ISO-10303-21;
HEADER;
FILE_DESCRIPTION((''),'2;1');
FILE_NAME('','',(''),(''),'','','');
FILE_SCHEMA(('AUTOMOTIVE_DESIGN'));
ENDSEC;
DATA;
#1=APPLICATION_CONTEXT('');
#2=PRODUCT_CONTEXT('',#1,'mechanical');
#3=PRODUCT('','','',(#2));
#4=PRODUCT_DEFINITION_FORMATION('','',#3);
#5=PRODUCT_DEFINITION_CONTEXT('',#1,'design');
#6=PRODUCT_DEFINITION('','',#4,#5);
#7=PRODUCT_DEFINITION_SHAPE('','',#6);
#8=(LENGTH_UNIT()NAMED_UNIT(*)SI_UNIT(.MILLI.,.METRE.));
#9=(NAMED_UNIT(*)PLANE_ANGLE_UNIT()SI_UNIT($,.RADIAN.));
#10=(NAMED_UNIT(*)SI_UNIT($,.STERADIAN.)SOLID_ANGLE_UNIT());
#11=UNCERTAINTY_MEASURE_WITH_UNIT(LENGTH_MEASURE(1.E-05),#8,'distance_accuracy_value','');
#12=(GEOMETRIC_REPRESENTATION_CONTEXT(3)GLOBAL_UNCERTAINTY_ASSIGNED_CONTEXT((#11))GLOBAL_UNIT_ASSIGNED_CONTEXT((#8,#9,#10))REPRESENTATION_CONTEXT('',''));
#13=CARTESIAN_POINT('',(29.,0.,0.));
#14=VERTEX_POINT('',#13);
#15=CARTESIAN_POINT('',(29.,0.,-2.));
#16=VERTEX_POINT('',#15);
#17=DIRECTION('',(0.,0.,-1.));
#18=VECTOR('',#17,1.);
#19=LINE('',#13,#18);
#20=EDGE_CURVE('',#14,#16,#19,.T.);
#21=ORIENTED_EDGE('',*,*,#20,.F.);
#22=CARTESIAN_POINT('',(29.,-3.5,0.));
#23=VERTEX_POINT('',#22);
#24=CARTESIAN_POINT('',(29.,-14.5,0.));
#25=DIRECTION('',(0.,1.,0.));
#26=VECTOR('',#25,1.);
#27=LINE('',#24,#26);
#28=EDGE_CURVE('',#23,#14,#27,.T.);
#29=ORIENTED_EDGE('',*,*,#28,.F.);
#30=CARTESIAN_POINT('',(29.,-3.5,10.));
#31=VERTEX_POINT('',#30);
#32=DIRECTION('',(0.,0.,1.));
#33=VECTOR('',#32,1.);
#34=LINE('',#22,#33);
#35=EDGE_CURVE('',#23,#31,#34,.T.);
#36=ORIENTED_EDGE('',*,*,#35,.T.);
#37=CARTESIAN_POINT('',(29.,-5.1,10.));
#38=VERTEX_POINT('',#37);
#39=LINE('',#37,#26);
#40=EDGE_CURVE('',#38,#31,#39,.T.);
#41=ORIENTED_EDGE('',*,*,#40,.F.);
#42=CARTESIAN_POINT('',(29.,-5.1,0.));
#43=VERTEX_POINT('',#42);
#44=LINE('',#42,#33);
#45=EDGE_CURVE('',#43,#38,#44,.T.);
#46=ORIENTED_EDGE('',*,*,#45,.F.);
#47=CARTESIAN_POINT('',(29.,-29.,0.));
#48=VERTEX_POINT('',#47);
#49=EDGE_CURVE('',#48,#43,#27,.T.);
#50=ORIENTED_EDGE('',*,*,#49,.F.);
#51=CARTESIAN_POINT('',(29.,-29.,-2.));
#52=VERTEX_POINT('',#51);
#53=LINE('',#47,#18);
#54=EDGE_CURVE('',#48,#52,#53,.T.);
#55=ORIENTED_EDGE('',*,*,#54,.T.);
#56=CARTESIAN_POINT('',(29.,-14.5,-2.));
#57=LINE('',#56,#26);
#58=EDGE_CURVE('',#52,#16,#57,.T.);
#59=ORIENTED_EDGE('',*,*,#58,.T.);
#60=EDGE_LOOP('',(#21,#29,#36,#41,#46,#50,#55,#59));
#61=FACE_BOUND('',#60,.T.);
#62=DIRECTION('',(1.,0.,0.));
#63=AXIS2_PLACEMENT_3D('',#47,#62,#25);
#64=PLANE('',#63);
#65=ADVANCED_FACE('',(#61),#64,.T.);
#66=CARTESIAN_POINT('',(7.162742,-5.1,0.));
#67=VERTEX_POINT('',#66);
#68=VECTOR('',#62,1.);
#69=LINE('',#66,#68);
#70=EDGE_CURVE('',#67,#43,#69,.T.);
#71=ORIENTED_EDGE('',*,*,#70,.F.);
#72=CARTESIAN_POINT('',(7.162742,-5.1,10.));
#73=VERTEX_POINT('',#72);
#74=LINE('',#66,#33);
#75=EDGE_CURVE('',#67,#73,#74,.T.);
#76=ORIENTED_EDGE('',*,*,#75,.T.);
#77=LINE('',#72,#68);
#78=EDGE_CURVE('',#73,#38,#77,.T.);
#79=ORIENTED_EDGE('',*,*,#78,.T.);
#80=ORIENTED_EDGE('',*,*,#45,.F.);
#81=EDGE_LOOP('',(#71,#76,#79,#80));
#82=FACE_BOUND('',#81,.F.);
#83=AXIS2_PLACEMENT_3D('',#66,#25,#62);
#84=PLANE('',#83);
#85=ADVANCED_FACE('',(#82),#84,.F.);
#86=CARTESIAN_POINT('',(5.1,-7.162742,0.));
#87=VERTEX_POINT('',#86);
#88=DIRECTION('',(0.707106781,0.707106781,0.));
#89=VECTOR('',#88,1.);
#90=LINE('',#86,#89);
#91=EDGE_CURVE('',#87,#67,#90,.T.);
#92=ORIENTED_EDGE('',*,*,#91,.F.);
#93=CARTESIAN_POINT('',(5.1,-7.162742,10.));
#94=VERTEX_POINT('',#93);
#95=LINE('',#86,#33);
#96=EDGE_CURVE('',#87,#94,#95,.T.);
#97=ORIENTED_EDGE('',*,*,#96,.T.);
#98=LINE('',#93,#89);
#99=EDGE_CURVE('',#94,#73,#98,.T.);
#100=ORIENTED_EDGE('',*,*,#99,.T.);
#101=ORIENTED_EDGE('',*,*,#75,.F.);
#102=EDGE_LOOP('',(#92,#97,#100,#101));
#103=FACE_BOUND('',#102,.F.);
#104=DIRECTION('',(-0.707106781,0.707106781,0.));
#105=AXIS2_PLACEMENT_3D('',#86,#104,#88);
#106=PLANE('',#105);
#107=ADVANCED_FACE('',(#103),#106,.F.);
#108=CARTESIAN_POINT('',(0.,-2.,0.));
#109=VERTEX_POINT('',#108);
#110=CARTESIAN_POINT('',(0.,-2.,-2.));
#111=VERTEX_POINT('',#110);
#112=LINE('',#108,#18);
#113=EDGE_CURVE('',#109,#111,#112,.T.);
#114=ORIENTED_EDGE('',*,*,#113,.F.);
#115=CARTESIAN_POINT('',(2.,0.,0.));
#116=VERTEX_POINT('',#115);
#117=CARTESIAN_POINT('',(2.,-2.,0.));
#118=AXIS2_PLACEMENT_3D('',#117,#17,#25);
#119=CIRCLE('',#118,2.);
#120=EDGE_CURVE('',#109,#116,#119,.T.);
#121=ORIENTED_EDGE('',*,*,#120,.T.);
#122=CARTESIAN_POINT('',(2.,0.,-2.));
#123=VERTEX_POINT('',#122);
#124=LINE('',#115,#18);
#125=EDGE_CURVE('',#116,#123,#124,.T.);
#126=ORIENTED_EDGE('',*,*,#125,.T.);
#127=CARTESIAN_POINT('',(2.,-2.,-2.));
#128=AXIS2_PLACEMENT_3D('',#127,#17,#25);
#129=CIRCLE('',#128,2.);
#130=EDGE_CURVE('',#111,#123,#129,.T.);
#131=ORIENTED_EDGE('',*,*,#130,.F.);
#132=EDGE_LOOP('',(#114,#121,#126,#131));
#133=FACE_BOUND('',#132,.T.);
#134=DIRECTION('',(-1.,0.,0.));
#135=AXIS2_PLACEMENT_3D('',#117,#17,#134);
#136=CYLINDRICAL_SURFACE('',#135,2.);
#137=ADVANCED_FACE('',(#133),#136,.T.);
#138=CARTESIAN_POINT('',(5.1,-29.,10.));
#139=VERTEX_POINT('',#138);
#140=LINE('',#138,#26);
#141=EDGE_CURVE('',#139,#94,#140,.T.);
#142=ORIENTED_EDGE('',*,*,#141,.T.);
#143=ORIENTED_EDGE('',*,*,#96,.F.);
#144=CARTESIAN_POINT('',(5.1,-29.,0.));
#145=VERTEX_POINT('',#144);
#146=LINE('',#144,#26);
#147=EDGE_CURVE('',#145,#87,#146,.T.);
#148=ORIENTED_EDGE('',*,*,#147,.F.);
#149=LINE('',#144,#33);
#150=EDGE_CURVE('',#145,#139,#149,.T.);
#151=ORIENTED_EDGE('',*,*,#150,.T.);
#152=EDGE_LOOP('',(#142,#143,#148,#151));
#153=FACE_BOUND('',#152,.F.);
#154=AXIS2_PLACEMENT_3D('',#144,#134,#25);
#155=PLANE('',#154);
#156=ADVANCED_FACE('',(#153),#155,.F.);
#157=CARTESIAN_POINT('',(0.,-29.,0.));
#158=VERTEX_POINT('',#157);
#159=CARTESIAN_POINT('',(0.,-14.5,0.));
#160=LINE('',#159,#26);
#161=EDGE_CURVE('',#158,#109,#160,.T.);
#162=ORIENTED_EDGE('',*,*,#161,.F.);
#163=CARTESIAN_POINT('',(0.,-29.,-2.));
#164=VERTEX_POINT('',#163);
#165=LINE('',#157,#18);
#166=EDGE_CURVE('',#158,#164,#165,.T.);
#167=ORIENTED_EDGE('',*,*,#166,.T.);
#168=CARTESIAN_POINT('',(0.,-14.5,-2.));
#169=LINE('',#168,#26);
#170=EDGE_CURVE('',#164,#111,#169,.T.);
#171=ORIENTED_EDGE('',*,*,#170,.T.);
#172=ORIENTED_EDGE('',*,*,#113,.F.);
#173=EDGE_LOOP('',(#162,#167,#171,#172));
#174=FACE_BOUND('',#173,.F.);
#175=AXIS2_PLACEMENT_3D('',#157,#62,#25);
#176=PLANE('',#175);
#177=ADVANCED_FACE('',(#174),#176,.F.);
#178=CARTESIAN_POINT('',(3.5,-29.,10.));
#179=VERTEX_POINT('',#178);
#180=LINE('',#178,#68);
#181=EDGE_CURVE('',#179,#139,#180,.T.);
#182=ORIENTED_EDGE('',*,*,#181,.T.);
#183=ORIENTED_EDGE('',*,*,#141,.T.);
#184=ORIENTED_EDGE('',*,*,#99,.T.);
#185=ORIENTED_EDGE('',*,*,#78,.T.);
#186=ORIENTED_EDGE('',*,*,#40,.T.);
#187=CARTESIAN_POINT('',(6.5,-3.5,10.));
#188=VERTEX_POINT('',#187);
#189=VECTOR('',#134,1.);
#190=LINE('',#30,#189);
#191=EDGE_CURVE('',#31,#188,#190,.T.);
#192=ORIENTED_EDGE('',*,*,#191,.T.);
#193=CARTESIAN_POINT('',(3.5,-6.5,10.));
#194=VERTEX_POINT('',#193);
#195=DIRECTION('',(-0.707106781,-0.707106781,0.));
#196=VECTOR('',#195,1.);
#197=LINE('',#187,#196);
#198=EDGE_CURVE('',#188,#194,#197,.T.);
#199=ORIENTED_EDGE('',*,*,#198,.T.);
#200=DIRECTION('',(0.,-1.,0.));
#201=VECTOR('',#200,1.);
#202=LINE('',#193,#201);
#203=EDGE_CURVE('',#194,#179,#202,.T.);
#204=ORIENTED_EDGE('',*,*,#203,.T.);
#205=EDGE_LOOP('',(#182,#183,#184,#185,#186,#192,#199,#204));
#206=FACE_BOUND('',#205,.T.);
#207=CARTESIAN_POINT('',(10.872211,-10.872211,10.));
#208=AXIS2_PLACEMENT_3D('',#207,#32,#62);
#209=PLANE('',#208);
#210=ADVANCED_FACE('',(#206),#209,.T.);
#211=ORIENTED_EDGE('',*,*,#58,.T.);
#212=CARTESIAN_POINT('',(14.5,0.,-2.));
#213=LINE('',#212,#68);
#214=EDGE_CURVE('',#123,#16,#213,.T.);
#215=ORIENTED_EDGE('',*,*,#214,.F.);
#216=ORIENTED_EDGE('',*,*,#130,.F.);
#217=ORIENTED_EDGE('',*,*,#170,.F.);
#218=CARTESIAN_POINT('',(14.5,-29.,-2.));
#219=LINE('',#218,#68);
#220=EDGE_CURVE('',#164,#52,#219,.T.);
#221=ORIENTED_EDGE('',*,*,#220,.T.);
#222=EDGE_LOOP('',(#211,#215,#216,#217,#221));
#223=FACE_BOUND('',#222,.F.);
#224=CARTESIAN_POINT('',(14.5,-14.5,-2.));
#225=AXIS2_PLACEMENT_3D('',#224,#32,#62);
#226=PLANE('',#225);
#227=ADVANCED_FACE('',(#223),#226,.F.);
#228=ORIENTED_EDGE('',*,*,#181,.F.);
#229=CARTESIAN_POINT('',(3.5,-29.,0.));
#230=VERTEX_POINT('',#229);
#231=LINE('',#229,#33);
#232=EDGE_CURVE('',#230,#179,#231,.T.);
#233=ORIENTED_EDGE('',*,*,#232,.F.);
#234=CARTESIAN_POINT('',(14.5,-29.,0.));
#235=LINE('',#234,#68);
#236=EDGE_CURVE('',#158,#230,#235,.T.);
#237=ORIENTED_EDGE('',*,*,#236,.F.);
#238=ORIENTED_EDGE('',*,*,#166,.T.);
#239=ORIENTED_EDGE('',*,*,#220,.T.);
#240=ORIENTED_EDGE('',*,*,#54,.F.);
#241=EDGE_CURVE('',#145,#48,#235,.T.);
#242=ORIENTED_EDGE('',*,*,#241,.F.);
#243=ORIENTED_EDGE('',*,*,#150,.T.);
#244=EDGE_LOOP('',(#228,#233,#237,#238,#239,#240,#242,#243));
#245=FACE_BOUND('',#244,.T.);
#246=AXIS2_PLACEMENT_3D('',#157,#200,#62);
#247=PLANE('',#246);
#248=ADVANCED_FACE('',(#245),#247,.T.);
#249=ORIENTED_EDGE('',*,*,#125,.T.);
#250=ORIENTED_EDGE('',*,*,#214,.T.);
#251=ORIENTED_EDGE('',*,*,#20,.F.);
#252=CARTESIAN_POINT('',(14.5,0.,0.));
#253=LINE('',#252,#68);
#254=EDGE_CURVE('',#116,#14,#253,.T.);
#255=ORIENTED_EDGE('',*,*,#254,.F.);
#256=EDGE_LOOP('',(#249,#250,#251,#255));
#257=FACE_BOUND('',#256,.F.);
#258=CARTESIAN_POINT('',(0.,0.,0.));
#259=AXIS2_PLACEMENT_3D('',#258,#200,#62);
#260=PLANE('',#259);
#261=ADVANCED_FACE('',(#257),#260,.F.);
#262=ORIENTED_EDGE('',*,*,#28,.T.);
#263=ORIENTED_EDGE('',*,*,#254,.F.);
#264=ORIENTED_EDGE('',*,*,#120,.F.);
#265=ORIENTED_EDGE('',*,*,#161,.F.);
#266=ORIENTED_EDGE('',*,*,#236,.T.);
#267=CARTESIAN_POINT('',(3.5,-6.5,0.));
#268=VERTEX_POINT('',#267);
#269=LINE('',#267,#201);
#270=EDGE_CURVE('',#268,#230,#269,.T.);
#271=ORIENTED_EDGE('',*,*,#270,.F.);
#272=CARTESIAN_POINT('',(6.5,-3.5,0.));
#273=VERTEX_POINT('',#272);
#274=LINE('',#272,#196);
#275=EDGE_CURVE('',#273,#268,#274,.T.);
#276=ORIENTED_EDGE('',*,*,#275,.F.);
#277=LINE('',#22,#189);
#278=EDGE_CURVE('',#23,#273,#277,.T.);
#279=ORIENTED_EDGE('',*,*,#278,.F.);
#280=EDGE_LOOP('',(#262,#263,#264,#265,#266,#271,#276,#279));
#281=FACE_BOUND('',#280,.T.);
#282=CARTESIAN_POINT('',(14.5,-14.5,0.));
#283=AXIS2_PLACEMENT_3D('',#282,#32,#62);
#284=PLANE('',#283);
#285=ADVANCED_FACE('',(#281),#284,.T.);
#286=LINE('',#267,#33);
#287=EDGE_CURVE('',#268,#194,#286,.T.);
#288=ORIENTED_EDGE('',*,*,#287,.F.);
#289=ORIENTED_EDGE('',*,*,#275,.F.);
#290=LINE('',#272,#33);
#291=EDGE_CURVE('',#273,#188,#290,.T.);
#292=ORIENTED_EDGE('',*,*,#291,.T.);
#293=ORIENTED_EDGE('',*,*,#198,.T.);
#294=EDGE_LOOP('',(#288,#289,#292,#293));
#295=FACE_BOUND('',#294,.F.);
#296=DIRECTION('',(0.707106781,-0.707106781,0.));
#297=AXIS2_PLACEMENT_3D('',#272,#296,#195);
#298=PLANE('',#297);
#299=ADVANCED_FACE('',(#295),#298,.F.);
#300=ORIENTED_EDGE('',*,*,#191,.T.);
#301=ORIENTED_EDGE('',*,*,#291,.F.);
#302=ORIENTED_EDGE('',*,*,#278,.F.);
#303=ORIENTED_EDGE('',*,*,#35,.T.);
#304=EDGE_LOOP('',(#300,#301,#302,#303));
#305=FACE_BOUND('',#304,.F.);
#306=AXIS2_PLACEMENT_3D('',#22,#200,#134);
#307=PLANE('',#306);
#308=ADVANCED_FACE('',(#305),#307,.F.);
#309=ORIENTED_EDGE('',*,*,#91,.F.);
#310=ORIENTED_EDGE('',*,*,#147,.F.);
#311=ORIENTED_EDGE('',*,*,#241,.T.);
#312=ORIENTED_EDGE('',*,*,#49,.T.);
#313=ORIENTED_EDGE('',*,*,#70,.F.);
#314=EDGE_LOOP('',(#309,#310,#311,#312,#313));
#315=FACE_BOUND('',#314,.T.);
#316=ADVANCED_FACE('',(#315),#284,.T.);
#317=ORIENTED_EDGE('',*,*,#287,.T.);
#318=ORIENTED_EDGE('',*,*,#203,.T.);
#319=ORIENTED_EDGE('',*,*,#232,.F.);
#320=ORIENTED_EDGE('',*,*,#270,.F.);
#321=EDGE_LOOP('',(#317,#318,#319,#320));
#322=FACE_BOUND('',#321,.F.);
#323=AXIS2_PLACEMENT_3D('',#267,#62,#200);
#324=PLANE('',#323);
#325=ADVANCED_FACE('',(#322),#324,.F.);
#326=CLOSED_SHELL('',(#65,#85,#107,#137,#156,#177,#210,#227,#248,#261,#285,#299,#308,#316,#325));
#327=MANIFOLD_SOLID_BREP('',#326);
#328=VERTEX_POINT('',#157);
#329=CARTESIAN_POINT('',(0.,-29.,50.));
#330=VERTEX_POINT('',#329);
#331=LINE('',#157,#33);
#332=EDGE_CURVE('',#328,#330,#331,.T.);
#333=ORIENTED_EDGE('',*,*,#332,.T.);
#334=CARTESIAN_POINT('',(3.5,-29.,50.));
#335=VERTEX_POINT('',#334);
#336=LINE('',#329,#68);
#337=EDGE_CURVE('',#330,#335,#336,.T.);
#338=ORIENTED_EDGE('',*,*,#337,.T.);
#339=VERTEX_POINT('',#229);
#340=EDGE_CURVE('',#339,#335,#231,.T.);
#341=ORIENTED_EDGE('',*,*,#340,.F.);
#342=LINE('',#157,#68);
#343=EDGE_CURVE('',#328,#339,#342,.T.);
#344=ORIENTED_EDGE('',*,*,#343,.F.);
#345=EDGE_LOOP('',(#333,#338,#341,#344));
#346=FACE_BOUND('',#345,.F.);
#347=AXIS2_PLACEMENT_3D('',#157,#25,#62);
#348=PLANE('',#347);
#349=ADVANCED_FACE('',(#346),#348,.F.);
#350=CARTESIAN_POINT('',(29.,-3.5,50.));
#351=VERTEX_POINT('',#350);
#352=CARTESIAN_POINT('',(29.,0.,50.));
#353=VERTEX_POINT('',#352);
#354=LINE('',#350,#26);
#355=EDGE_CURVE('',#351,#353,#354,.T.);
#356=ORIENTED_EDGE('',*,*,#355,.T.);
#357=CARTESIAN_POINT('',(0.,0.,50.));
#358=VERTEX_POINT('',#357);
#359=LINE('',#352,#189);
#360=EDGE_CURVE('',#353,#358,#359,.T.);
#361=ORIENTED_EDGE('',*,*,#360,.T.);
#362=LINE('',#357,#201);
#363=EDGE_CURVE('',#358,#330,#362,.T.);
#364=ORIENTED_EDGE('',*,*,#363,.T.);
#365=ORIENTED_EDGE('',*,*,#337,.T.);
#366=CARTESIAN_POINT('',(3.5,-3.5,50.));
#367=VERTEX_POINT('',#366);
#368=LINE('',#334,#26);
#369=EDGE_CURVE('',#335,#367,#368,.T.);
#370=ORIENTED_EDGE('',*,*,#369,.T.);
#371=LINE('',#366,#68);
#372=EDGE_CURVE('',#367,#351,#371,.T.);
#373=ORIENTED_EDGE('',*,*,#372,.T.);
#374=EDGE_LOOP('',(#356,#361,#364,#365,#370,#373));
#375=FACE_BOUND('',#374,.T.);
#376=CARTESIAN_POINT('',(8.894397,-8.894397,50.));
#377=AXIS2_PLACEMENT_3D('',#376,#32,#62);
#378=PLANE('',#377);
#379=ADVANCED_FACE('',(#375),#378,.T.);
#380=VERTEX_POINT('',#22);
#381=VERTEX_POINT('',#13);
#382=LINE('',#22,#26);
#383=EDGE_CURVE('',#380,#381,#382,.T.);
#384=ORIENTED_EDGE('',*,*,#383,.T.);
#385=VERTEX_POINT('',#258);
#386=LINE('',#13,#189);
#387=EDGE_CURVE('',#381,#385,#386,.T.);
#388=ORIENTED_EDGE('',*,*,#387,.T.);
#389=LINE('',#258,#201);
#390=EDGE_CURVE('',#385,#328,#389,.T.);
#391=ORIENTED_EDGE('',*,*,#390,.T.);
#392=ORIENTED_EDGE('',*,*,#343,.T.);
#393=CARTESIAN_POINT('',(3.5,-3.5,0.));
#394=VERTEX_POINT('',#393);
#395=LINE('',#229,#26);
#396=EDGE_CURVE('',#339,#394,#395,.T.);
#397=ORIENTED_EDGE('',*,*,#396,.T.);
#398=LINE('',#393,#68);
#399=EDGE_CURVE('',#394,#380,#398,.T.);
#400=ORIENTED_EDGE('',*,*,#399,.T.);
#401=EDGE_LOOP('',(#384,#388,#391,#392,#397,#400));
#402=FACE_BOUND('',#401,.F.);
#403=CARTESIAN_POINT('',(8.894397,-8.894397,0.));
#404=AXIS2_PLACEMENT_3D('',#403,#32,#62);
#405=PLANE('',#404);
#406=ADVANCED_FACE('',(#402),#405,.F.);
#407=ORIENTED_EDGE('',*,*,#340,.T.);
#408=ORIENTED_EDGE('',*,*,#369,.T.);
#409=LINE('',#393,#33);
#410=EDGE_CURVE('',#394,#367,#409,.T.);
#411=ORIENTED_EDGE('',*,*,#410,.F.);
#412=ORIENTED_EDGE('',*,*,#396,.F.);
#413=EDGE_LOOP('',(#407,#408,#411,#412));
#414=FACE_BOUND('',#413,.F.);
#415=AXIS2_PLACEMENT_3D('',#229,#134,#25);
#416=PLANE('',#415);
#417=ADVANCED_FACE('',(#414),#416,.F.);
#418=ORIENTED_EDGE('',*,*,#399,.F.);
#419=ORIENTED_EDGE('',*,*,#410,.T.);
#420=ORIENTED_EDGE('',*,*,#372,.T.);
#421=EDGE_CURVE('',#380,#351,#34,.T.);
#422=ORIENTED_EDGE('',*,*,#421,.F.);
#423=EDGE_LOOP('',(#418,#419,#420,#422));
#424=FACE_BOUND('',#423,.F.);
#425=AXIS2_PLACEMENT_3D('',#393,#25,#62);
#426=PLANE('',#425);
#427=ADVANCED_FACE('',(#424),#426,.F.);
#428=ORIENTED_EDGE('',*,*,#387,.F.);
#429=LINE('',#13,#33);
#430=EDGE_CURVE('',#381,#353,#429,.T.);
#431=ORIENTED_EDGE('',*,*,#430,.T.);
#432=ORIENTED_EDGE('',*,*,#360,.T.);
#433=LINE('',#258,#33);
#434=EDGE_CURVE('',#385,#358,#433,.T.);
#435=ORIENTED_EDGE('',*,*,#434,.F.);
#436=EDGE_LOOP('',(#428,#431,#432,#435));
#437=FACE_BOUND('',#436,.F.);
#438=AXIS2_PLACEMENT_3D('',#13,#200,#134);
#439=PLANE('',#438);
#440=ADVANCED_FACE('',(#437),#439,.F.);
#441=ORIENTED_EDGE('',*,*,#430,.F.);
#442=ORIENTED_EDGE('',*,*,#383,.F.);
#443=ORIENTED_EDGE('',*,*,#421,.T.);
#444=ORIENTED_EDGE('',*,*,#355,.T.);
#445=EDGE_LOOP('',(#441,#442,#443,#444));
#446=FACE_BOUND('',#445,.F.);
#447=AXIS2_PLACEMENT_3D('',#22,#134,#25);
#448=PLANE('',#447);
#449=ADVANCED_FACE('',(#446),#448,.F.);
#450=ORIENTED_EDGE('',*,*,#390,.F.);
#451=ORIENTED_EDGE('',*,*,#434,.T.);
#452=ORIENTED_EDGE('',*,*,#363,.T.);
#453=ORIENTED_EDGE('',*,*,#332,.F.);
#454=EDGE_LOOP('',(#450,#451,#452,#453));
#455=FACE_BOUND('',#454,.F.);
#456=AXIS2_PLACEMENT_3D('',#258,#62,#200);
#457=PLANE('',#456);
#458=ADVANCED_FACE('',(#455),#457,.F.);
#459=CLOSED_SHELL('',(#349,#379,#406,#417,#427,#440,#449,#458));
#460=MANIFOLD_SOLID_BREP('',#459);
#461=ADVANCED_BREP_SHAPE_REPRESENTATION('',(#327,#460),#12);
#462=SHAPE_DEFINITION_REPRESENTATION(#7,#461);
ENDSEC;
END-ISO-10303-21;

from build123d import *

# Parameters (mm, degrees)
F1_DEPTH = 50
F2_W     = 29
F2_H     = 29
F3_DEPTH = 2
F5_DEPTH = 10
F6_R     = 2


with BuildPart() as f1:
    # F0 (on Top) → F1 (new body)
    with BuildSketch(Plane.XY):
        Polygon((29, 0), (0, 0), (0, -29), (3.5, -29), (3.5, -3.5), (29, -3.5), align=None)
    extrude(amount=F1_DEPTH)


with BuildPart() as f3:
    # F2 (on Top) → F3 (new body)
    with BuildSketch(Plane.XY):
        with Locations((14.5, -14.5)):
            Rectangle(F2_W, F2_H)
    extrude(amount=-F3_DEPTH)

    # F4 (on face) → F5 (join)
    with BuildSketch(Plane.XY):
        Polygon((3.5, -29), (5.1, -29), (5.1, -7.1627416998), (7.1627416998, -5.1), (29, -5.1), (29, -3.5), (6.5, -3.5), (3.5, -6.5), align=None)
    extrude(amount=F5_DEPTH)

    # F6
    f6_edges = [f3.edges().sort_by_distance(p)[0] for p in [
        (0, 0, -1),
    ]]
    fillet(f6_edges, radius=F6_R)


solid = Compound([f1.part, f3.part])
